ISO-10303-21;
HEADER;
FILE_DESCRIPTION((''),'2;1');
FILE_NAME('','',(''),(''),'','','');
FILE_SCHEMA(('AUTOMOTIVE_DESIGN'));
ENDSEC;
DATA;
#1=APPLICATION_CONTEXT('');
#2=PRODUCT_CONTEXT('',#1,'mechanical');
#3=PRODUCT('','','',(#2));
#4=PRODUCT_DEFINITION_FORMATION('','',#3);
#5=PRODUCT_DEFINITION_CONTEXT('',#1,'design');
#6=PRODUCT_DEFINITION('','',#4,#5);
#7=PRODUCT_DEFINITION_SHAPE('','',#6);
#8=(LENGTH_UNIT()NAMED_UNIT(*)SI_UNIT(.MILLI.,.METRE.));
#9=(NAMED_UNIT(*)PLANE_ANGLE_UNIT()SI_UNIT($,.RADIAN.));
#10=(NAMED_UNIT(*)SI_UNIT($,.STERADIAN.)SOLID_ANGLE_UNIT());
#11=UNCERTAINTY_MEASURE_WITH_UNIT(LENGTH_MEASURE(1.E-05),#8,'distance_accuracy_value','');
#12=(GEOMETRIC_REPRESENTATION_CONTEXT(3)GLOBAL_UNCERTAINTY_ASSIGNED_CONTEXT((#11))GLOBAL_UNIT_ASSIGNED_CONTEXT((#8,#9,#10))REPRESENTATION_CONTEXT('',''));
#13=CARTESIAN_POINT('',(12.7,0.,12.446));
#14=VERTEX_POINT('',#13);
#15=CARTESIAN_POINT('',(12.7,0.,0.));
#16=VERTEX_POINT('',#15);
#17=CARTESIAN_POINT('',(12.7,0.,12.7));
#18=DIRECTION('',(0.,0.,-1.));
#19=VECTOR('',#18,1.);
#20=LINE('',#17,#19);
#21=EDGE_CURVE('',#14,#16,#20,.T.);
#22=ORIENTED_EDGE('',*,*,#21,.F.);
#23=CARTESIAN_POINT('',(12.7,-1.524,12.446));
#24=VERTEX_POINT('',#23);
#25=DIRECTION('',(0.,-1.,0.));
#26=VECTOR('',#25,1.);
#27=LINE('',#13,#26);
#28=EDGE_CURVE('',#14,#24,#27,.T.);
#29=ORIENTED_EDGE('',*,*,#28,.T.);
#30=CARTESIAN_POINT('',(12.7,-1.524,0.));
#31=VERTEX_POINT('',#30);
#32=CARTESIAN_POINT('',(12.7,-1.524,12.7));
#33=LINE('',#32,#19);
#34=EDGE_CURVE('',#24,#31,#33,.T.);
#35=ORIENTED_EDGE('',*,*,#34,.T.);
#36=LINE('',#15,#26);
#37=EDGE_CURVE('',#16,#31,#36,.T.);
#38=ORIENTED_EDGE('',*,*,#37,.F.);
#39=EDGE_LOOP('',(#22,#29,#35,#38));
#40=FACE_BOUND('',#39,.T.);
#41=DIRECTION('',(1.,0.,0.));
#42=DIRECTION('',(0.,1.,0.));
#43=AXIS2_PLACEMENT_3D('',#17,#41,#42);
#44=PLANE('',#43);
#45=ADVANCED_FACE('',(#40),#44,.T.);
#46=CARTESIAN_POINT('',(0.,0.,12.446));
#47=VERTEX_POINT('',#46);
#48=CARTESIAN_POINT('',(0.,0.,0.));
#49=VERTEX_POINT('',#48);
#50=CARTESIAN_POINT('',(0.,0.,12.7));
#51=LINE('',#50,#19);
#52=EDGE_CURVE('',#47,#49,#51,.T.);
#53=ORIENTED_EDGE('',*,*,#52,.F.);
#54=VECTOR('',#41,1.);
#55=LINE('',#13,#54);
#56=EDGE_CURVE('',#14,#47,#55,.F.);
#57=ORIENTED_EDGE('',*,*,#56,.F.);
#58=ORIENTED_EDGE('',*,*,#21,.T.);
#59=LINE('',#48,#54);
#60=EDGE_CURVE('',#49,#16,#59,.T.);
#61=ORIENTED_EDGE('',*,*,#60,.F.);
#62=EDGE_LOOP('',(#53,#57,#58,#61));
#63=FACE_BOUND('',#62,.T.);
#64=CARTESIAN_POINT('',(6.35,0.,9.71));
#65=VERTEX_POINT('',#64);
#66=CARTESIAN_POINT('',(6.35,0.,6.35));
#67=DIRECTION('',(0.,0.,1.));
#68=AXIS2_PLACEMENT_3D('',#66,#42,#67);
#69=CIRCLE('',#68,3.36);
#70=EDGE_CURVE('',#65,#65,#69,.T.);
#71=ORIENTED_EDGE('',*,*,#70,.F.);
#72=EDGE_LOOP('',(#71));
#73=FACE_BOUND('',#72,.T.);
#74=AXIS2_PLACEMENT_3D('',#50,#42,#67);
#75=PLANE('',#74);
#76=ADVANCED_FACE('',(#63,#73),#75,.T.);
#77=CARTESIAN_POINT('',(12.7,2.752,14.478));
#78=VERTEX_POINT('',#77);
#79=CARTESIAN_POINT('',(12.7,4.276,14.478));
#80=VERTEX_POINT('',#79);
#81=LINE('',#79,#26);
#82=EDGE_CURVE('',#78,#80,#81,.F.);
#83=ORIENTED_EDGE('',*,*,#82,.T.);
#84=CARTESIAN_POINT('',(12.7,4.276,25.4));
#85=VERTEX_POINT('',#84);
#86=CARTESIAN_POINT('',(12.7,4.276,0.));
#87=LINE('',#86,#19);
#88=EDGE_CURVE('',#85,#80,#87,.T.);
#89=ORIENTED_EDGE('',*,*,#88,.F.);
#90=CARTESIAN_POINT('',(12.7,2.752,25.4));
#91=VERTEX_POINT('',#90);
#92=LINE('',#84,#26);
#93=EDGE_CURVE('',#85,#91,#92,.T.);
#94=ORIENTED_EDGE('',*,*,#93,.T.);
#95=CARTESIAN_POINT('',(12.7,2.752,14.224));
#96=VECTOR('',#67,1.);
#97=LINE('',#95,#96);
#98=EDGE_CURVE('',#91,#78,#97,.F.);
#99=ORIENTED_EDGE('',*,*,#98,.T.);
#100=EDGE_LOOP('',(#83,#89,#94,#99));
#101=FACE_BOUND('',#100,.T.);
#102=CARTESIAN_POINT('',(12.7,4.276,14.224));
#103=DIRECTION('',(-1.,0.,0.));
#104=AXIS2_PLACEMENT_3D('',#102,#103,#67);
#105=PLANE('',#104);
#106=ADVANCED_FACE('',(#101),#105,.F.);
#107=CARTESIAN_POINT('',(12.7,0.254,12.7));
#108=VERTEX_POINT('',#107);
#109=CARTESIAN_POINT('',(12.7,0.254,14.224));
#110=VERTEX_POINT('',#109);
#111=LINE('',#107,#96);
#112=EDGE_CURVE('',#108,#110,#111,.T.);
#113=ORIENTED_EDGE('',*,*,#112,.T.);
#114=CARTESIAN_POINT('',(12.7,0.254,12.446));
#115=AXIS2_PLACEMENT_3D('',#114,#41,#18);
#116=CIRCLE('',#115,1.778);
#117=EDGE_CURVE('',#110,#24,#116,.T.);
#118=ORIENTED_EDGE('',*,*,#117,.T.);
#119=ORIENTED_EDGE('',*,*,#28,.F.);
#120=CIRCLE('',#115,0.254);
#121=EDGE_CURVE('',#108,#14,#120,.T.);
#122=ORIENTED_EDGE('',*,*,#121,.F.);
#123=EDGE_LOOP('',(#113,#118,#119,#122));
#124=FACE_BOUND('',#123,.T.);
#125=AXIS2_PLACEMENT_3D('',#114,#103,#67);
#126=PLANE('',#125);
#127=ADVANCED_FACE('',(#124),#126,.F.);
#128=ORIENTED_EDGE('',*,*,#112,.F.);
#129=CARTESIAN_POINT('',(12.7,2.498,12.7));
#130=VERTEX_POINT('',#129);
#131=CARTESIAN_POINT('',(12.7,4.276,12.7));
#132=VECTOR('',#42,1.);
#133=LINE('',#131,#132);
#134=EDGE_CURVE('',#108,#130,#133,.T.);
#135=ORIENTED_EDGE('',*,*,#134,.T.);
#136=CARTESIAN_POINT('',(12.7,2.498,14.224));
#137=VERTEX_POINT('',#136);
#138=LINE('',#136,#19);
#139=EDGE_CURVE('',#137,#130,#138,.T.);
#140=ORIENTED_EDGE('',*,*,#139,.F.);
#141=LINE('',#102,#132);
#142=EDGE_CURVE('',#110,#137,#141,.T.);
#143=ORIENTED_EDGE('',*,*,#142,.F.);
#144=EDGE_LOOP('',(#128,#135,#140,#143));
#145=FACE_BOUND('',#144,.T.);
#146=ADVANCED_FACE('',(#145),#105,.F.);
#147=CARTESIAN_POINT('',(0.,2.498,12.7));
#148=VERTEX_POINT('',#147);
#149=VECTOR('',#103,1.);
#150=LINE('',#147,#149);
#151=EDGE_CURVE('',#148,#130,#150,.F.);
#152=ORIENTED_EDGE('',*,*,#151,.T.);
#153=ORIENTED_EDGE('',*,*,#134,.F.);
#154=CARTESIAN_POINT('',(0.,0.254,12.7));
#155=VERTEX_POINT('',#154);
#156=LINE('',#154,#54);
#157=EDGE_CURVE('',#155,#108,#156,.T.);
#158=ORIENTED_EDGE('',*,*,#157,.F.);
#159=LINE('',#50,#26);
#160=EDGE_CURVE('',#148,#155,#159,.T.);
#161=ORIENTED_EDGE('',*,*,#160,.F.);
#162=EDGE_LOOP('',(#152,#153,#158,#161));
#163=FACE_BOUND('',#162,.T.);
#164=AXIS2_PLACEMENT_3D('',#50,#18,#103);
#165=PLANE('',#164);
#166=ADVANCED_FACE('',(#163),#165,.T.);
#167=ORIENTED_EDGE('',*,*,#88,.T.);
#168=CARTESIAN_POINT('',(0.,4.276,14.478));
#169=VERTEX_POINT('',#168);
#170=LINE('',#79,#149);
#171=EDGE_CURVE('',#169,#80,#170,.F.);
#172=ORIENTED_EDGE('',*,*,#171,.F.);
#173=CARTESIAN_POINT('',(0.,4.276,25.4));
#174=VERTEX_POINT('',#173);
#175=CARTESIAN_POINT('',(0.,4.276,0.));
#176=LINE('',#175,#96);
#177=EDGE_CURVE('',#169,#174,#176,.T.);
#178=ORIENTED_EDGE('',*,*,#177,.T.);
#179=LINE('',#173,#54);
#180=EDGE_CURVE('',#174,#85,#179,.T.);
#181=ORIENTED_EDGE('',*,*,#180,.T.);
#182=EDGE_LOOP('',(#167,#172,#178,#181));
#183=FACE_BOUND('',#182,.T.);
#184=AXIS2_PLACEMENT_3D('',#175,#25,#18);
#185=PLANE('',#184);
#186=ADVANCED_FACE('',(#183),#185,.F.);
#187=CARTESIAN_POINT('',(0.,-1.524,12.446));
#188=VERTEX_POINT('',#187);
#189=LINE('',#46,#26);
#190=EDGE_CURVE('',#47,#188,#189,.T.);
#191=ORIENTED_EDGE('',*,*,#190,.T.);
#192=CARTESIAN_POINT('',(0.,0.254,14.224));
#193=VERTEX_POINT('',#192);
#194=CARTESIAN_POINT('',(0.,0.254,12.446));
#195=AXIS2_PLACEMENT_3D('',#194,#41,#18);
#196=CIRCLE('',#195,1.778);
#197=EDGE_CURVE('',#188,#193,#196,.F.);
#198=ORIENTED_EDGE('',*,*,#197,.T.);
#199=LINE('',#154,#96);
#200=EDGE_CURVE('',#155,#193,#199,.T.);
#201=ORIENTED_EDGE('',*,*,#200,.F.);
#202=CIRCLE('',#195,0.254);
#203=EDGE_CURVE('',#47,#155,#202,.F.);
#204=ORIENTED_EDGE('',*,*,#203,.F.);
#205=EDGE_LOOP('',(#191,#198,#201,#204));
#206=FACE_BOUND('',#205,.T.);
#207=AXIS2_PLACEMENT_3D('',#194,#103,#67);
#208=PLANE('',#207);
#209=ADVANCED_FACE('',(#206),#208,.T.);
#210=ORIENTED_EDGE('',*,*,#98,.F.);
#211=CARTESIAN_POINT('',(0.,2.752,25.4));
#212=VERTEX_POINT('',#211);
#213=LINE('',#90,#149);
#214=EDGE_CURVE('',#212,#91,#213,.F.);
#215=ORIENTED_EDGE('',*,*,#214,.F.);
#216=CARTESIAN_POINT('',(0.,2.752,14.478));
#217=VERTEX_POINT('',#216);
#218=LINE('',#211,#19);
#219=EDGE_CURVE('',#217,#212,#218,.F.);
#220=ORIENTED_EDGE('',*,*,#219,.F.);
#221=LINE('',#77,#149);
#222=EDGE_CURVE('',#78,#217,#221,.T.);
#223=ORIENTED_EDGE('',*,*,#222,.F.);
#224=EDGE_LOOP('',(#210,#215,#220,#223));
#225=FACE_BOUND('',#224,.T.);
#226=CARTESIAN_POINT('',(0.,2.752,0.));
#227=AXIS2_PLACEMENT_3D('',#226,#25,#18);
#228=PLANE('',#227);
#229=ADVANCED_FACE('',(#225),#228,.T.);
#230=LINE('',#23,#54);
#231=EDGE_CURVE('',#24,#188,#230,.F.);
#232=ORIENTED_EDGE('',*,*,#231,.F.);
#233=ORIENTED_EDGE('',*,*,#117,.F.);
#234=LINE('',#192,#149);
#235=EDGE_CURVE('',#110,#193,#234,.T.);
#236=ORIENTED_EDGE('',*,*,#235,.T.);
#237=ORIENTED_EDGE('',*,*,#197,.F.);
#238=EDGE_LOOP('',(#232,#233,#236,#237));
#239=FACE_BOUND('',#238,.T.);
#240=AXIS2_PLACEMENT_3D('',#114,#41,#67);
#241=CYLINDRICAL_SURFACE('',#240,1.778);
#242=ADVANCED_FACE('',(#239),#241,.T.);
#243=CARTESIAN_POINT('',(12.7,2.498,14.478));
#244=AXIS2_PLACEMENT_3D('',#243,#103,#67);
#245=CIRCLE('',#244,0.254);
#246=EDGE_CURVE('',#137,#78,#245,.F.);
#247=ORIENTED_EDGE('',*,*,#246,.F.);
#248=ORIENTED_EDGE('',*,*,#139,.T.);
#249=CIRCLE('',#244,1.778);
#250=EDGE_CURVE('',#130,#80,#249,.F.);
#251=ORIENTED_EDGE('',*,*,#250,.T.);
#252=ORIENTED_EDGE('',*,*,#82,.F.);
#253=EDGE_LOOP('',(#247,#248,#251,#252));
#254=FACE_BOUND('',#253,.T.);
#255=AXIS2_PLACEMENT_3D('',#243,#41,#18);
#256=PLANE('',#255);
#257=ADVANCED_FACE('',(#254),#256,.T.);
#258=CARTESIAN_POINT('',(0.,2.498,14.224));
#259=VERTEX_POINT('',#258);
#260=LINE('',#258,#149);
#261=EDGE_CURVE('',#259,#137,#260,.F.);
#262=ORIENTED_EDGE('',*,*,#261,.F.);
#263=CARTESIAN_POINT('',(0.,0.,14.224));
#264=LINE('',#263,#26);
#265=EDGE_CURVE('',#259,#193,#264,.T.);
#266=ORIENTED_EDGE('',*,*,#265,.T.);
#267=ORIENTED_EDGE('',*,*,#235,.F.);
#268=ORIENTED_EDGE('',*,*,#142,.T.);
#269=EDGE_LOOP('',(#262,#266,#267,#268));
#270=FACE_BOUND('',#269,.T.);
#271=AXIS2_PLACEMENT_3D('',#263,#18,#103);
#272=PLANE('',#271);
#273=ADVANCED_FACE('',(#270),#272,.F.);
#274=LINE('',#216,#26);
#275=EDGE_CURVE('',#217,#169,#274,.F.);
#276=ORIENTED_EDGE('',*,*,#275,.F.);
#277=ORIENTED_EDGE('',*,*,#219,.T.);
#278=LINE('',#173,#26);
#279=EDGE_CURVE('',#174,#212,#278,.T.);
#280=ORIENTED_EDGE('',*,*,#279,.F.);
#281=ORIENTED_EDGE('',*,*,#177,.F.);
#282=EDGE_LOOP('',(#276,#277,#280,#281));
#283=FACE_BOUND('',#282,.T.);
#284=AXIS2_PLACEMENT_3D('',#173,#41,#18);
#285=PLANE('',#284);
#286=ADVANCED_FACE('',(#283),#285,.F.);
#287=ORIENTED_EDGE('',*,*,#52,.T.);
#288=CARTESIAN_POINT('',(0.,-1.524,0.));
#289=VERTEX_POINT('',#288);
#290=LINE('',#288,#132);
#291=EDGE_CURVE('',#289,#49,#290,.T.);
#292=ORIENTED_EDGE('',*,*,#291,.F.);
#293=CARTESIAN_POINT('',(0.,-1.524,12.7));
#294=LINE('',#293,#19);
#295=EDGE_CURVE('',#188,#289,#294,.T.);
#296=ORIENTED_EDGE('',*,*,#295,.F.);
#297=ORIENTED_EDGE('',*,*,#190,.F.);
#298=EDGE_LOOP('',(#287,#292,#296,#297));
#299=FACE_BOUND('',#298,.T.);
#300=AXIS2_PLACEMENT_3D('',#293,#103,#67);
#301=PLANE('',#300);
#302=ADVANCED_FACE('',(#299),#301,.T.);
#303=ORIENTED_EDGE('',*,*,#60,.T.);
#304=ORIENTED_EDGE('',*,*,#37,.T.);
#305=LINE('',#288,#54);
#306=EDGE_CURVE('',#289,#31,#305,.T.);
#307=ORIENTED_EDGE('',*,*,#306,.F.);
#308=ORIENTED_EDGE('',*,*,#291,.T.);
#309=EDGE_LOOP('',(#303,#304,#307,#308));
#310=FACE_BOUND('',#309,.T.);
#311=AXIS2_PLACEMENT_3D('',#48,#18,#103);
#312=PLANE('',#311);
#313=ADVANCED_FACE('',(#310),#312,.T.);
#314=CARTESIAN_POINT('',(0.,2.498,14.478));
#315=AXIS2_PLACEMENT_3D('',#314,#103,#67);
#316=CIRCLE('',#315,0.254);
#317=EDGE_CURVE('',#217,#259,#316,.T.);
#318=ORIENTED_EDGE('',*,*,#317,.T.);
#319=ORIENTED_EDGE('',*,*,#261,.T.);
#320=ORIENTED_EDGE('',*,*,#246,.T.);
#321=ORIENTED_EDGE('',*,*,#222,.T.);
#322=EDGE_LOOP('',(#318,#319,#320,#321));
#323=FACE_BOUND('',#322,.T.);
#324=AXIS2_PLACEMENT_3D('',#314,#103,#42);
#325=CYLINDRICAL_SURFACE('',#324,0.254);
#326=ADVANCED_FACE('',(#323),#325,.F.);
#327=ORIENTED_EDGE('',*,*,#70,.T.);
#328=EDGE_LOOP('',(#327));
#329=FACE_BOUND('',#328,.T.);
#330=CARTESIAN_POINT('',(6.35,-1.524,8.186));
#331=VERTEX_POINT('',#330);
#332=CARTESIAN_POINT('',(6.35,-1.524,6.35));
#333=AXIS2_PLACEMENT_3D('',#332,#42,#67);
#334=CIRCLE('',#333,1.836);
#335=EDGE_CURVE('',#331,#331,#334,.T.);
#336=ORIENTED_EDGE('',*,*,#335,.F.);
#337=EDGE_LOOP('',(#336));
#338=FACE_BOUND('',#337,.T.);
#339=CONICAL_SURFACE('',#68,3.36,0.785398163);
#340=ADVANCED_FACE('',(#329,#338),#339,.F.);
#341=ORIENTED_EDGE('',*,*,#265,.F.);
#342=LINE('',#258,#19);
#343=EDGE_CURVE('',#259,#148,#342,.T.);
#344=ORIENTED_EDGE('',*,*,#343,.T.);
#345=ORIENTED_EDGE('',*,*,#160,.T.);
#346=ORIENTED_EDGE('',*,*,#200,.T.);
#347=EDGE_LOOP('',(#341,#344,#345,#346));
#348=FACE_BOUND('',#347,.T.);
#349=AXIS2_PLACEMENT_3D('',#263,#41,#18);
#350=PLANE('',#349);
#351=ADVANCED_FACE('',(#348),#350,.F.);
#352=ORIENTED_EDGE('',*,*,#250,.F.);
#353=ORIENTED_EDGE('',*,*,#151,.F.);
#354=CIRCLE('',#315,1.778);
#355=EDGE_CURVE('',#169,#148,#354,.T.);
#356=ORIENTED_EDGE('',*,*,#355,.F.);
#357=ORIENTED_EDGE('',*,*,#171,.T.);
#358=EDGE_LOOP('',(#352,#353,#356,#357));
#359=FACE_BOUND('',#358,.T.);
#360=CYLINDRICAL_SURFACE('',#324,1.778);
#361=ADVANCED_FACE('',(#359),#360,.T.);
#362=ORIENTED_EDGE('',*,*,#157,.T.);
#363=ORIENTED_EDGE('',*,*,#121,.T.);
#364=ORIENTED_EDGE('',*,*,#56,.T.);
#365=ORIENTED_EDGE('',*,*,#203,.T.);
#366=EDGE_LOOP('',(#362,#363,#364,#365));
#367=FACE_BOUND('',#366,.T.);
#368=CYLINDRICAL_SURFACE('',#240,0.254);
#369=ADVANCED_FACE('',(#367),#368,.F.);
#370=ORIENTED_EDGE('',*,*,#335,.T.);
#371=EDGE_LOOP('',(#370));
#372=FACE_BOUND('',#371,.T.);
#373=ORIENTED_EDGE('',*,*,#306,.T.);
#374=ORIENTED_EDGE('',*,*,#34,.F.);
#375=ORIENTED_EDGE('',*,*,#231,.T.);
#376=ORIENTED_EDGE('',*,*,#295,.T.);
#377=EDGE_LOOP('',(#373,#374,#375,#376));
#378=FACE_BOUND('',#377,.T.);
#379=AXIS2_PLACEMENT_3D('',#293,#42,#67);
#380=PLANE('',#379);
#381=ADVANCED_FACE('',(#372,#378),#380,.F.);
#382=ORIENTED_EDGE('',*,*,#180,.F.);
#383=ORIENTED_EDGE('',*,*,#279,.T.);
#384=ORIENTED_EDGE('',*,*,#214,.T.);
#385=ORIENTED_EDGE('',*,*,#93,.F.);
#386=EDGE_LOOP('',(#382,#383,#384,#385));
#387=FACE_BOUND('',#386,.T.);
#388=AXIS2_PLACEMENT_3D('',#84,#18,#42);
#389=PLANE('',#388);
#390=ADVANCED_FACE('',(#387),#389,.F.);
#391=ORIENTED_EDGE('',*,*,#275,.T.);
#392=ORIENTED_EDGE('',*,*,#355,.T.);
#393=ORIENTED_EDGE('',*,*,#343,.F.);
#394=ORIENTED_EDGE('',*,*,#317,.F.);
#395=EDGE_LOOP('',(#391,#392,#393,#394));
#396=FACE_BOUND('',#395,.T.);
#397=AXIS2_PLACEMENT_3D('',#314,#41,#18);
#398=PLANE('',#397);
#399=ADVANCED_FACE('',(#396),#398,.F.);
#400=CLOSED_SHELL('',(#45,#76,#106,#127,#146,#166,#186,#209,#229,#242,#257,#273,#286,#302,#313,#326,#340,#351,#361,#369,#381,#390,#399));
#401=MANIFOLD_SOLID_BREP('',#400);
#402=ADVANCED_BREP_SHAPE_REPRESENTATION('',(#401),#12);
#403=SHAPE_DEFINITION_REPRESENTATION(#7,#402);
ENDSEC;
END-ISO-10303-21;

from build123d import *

# Parameters (mm, degrees)
SKETCH1_W                    = 12.7
SKETCH1_H                    = 1.524
BASE_FLANGE1_DEPTH           = 12.7
EDGE_FLANGE2_STRIP_W         = 6.604
EDGE_FLANGE2_STRIP_H         = 1.524
EDGE_FLANGE2_STRIP_CUT_DEPTH = 12.7
EDGE_FLANGE2_DEPTH           = 12.7
EDGE_FLANGE4_STRIP_W         = 6.604
EDGE_FLANGE4_STRIP_H         = 1.524
EDGE_FLANGE4_STRIP_CUT_DEPTH = 12.7
EDGE_FLANGE4_DEPTH           = 12.7


# Sheet-metal steps are written as plain solids
with BuildPart() as part:
    # Sketch1 → Base-Flange1 (new body)
    with BuildSketch(Plane.XY):
        with Locations((6.35, -0.762)):
            Rectangle(SKETCH1_W, SKETCH1_H)
    extrude(amount=BASE_FLANGE1_DEPTH)

    # Edge-Flange2 strip (across the edge) → Edge-Flange2 strip cut (cut)
    with BuildSketch(Plane(origin=(0, 0, 12.7), x_dir=(0, 0, -1), z_dir=(1, 0, 0))):
        with Locations((-3.048, -0.762)):
            Rectangle(EDGE_FLANGE2_STRIP_W, EDGE_FLANGE2_STRIP_H)
    extrude(amount=EDGE_FLANGE2_STRIP_CUT_DEPTH, mode=Mode.SUBTRACT)

    # Edge-Flange2 section (across the edge) → Edge-Flange2 (add)
    with BuildSketch(Plane(origin=(0, 0, 12.7), x_dir=(0, 0, -1), z_dir=(1, 0, 0))):
        with BuildLine():
            Line((-1.524, 0.254), (-1.524, 4.276))
            Line((-1.524, 4.276), (0, 4.276))
            Line((0, 4.276), (0, 0.254))
            ThreePointArc((0, 0.254), (0.074394878, 0.074394878), (0.254, 0))
            Line((0.254, 0), (0.254, -1.524))
            ThreePointArc((0.254, -1.524), (-1.003235857, -1.003235857), (-1.524, 0.254))
        make_face()
    extrude(amount=EDGE_FLANGE2_DEPTH)

    # Sketch10 → CSK for M3 SFHCS1 (revolve, cut)
    with BuildSketch(Plane(origin=(6.35, 0, 6.35), x_dir=(0, 0, 1), z_dir=(1, 0, 0))):
        Polygon((0, 0), (0, 1.524), (1.7, 1.524), (1.7, 1.66), (3.36, 0), align=None)
    revolve(axis=Axis((6.35, 6.35, 6.35), (0, -1, 0)), mode=Mode.SUBTRACT)

    # Edge-Flange4 strip (across the edge) → Edge-Flange4 strip cut (cut)
    with BuildSketch(Plane(origin=(12.7, 4.276, 14.224), x_dir=(0, -1, 0), z_dir=(-1, 0, 0))):
        with Locations((-1.524, -0.762)):
            Rectangle(EDGE_FLANGE4_STRIP_W, EDGE_FLANGE4_STRIP_H)
    extrude(amount=EDGE_FLANGE4_STRIP_CUT_DEPTH, mode=Mode.SUBTRACT)

    # Edge-Flange4 section (across the edge) → Edge-Flange4 (add)
    with BuildSketch(Plane(origin=(12.7, 4.276, 14.224), x_dir=(0, -1, 0), z_dir=(-1, 0, 0))):
        with BuildLine():
            Line((0, 0.254), (0, 11.176))
            Line((0, 11.176), (1.524, 11.176))
            Line((1.524, 11.176), (1.524, 0.254))
            ThreePointArc((1.524, 0.254), (1.598394878, 0.074394878), (1.778, 0))
            Line((1.778, 0), (1.778, -1.524))
            ThreePointArc((1.778, -1.524), (0.520764143, -1.003235857), (0, 0.254))
        make_face()
    extrude(amount=EDGE_FLANGE4_DEPTH)


solid = part.part
